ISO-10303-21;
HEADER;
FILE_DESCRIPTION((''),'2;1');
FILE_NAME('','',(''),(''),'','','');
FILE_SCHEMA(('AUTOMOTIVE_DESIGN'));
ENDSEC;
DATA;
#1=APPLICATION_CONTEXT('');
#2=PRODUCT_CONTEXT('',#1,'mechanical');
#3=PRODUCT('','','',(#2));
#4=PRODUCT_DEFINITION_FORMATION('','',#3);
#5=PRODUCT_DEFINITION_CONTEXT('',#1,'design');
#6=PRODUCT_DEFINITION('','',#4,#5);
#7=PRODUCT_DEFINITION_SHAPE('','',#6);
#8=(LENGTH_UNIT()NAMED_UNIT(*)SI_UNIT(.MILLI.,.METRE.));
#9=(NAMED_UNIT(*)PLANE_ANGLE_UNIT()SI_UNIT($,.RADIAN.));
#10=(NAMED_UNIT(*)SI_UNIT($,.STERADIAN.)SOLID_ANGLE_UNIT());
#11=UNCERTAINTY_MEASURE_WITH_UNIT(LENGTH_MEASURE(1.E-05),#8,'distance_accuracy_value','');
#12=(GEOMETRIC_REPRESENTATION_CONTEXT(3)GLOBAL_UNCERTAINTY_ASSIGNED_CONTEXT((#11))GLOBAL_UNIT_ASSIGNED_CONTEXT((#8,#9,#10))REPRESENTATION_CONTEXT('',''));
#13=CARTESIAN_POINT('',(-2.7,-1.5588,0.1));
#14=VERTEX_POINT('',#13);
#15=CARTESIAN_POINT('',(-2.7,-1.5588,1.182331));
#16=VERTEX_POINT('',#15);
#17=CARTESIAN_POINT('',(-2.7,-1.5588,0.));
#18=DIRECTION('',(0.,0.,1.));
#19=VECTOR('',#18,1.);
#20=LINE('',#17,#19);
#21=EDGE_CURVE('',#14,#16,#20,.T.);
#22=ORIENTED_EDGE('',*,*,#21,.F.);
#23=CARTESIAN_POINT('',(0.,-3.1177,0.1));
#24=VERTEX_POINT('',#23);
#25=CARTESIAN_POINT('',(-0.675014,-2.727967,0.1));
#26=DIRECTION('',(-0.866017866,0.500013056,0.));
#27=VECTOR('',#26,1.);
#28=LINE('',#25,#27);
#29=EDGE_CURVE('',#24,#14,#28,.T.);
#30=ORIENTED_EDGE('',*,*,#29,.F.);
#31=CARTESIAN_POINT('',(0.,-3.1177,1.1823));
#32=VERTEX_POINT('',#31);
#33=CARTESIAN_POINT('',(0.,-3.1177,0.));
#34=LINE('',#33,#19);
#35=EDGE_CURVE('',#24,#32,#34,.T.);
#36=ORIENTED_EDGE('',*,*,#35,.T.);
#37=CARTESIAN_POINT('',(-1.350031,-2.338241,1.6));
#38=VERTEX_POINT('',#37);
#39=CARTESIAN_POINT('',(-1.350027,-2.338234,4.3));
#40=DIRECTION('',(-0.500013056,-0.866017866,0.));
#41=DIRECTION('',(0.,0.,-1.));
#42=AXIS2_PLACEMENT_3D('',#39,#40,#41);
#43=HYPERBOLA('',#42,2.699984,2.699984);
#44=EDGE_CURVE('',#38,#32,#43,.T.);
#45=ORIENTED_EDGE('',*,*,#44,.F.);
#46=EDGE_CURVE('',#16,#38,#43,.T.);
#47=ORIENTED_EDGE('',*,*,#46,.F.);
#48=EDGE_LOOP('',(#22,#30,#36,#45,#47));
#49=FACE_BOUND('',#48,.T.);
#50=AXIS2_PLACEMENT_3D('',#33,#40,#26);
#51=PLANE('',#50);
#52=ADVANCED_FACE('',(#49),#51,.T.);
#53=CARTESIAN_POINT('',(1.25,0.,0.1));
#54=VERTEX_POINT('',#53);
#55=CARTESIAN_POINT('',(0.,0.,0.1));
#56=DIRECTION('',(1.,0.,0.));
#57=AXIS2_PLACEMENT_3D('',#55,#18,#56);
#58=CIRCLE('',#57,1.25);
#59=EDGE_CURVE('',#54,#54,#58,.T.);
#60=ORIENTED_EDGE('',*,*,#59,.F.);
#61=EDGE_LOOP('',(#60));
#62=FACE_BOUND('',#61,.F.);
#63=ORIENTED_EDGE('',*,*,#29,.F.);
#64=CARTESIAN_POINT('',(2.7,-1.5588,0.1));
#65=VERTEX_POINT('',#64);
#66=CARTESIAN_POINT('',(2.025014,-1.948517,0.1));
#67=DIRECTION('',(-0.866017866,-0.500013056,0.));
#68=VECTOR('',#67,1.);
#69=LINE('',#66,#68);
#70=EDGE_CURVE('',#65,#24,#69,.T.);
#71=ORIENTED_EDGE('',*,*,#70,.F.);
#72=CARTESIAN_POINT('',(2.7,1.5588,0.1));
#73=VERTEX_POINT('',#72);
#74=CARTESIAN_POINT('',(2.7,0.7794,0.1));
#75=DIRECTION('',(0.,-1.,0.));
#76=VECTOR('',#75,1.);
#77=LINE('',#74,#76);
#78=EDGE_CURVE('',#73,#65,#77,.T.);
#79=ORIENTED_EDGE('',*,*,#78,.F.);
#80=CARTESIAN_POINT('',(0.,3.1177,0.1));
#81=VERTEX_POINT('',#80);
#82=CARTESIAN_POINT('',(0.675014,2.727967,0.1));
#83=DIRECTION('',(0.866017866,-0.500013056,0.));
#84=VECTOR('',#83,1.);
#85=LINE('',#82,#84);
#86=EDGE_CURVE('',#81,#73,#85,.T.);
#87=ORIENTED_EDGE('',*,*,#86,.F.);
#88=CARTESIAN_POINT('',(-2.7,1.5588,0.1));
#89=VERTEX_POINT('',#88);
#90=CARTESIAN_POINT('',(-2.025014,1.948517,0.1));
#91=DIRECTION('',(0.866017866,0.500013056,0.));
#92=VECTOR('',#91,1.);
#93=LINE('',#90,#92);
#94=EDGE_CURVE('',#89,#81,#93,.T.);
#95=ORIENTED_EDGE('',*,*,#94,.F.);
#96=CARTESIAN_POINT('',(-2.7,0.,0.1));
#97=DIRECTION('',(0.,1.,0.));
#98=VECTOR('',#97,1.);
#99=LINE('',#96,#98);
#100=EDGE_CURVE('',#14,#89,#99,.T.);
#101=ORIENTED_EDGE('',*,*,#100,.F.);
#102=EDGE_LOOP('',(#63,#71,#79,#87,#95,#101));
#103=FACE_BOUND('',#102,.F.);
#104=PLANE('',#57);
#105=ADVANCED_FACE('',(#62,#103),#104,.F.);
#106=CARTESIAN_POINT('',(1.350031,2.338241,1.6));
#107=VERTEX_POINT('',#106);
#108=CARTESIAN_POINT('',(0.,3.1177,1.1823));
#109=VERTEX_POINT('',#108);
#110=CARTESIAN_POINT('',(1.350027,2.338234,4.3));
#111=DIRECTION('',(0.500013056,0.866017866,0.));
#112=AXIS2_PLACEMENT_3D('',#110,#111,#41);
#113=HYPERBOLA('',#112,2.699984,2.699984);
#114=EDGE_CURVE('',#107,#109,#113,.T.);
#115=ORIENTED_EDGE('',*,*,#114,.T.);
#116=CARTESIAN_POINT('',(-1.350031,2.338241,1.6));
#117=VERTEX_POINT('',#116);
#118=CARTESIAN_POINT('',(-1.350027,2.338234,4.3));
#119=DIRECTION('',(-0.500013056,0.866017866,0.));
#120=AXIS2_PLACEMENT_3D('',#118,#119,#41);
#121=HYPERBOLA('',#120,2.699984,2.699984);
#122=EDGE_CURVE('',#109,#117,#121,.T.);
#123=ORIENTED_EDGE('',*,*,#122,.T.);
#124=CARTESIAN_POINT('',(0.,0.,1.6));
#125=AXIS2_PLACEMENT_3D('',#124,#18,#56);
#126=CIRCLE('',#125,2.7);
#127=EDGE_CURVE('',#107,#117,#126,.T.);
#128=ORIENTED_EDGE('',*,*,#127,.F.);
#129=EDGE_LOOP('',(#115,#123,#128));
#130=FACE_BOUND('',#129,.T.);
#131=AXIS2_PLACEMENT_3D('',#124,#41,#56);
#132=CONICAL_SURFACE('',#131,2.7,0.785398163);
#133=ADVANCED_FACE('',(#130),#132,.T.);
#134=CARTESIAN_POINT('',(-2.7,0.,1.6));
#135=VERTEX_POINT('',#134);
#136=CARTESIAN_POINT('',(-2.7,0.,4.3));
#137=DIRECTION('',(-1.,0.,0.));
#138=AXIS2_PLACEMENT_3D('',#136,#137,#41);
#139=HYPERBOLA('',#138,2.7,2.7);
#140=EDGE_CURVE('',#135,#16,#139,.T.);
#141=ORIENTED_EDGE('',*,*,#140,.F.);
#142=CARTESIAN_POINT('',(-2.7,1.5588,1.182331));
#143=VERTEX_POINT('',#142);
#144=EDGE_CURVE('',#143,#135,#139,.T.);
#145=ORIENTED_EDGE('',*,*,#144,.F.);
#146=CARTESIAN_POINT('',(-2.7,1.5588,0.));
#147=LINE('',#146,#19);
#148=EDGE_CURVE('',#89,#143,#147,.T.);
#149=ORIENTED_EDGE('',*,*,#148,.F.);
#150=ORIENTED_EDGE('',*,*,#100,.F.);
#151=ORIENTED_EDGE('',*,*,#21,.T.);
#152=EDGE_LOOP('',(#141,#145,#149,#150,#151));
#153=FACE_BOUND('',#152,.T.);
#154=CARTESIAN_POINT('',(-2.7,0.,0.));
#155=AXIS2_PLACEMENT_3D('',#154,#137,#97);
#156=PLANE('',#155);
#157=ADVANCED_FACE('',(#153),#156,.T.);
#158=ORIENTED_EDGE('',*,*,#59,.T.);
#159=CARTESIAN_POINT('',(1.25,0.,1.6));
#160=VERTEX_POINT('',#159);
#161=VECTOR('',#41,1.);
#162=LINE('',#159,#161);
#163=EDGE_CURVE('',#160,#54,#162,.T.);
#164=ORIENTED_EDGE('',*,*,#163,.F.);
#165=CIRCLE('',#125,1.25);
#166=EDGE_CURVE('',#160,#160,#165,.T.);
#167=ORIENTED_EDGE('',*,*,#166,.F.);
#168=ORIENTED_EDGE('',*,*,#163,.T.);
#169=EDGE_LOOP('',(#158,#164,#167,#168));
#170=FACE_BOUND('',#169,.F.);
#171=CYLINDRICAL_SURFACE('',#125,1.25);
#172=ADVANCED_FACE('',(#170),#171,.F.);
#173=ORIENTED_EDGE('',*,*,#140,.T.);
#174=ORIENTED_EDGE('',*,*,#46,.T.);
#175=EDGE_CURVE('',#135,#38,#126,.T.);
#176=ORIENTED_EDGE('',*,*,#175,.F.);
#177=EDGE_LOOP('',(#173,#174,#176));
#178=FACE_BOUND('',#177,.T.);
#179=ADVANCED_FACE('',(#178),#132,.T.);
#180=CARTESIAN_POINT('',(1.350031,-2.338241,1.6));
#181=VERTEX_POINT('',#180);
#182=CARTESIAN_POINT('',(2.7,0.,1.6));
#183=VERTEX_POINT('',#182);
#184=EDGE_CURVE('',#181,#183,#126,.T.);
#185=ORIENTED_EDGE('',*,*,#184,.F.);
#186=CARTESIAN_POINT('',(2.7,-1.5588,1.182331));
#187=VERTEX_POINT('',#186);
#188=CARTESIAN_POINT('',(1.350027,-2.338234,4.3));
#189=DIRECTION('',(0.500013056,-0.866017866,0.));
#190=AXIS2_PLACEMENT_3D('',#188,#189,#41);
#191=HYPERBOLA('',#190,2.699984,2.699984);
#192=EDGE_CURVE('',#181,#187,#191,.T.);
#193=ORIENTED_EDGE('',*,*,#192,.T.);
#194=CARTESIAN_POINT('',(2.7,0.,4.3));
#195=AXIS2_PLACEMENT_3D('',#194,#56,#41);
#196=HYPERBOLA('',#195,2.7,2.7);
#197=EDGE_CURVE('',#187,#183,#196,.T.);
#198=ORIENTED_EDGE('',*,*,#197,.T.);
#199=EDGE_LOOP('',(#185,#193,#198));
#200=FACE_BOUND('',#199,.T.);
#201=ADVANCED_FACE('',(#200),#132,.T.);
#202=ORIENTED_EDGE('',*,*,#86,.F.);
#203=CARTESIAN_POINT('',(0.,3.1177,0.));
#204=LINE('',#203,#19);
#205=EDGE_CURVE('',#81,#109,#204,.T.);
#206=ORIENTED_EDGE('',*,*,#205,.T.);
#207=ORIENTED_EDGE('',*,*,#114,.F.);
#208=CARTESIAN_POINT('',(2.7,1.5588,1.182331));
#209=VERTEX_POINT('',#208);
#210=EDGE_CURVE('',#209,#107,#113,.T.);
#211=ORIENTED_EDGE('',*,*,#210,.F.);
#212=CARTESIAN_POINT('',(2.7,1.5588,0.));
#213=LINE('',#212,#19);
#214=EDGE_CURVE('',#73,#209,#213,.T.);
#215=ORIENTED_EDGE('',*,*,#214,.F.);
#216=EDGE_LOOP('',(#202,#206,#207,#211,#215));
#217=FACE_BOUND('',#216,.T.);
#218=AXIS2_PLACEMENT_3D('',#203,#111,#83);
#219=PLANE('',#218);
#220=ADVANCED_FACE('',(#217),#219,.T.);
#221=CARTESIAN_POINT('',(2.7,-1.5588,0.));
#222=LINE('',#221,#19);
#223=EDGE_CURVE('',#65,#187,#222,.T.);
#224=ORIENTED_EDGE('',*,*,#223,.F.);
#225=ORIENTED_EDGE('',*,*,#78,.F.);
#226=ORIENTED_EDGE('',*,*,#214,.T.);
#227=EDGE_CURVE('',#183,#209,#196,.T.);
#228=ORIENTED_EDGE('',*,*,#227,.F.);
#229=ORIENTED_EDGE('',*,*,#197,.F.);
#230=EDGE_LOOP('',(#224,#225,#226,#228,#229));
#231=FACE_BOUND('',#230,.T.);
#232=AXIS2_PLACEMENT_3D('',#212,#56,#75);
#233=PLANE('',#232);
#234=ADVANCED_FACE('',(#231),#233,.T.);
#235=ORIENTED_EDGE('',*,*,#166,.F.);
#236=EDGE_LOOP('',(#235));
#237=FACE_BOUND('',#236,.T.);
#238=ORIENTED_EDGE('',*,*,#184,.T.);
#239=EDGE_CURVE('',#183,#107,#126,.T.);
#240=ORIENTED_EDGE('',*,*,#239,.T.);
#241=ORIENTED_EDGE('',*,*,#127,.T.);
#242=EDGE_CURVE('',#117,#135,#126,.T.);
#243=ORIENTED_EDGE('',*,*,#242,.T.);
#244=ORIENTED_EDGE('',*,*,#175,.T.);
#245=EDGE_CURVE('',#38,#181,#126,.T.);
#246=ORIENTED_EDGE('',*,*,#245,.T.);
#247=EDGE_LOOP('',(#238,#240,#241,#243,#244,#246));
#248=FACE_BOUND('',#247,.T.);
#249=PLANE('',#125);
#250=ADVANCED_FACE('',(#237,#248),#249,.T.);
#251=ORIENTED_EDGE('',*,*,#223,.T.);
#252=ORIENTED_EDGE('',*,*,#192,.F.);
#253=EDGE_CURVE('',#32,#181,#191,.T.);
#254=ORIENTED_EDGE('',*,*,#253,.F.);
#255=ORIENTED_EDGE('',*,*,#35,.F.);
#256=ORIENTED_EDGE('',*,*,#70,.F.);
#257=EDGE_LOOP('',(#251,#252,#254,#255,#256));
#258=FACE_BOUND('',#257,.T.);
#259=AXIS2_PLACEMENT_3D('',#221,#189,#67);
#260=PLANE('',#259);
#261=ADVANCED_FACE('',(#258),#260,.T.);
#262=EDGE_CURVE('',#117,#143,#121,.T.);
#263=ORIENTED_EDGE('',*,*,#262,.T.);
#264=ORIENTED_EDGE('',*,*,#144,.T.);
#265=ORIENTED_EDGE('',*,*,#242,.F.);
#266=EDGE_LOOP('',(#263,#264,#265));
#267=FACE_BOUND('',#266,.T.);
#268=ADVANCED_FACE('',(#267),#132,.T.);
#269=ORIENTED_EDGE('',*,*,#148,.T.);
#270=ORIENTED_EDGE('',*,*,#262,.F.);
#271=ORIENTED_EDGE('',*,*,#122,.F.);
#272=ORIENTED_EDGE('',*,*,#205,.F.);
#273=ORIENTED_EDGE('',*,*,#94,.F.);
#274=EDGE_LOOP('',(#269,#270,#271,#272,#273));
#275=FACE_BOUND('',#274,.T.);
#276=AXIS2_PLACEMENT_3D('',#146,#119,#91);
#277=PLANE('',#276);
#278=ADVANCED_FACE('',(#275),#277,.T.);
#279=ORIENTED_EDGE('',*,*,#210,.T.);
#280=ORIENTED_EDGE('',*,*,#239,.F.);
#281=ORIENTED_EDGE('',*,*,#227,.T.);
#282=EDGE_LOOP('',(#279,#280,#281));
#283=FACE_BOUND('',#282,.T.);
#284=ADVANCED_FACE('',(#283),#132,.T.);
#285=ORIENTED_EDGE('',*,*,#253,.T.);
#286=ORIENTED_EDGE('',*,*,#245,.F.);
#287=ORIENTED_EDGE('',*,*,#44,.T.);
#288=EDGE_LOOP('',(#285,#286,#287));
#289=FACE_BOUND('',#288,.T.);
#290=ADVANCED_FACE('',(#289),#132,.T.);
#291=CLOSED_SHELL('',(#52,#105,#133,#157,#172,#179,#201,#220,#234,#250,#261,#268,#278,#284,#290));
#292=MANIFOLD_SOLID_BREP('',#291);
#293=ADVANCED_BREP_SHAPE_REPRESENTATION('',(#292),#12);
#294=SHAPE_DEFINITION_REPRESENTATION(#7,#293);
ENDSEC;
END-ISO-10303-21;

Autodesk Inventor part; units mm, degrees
ref_plane "YZ-Ebene" through (0, 0, 0) normal (1, 0, 0) x (0, 1, 0)
ref_plane "XZ-Ebene" through (0, 0, 0) normal (0, 1, 0) x (-1, 0, 0)
ref_plane "XY-Ebene" through (0, 0, 0) normal (0, 0, 1) x (1, 0, 0)
sketch "Skizze1" plane through (0, 0, 0) normal (0, 0, 1) x (1, 0, 0)
  line L0 (-3.78, 0) -> (3.78, 0) projected
  line L1 (0, -4.3648) -> (0, 4.3648) projected
  line L2 (0, 3.1177) -> (2.7, 1.5588)
  line L3 (2.7, 1.5588) -> (2.7, -1.5588)
  line L4 (2.7, -1.5588) -> (0, -3.1177)
  line L5 (0, -3.1177) -> (-2.7, -1.5588)
  line L6 (-2.7, -1.5588) -> (-2.7, 1.5588)
  line L7 (-2.7, 1.5588) -> (0, 3.1177)
  point P0 (0, 0)
  point P1 (0, 0)
  dimension "d0" = 5.4
extrude "Extrusion1" add sketch "Skizze1" along normal blind 1.6
sketch "Skizze2" plane through (0, 0, 1.6) normal (0, 0, 1) x (1, 0, 0)
  line L0 (0, 3.1177) -> (-2.7, 1.5588) projected
  circle A0 centre (0, 0) radius 2.7
extrude "Extrusion2" cut sketch "Skizze2" against normal blind 1.5 draft 45 keep common part
sketch "Skizze3" plane through (0, 0, 1.6) normal (0, 0, 1) x (1, 0, 0)
  arc A0 (-2.7, 0) -> (-1.35, -2.3383) centre (0, 0) ccw projected
  circle A1 centre (0, 0) radius 1.25
  dimension "d5" = 2.5
extrude "Extrusion3" cut sketch "Skizze3" against normal blind 1.5
thread "Gewinde1" size "M3x0.5" class "6H" standard "ANSI Metric M Profile" length 7
properties part number "Mutter_ra8846s" material "Stahl"
